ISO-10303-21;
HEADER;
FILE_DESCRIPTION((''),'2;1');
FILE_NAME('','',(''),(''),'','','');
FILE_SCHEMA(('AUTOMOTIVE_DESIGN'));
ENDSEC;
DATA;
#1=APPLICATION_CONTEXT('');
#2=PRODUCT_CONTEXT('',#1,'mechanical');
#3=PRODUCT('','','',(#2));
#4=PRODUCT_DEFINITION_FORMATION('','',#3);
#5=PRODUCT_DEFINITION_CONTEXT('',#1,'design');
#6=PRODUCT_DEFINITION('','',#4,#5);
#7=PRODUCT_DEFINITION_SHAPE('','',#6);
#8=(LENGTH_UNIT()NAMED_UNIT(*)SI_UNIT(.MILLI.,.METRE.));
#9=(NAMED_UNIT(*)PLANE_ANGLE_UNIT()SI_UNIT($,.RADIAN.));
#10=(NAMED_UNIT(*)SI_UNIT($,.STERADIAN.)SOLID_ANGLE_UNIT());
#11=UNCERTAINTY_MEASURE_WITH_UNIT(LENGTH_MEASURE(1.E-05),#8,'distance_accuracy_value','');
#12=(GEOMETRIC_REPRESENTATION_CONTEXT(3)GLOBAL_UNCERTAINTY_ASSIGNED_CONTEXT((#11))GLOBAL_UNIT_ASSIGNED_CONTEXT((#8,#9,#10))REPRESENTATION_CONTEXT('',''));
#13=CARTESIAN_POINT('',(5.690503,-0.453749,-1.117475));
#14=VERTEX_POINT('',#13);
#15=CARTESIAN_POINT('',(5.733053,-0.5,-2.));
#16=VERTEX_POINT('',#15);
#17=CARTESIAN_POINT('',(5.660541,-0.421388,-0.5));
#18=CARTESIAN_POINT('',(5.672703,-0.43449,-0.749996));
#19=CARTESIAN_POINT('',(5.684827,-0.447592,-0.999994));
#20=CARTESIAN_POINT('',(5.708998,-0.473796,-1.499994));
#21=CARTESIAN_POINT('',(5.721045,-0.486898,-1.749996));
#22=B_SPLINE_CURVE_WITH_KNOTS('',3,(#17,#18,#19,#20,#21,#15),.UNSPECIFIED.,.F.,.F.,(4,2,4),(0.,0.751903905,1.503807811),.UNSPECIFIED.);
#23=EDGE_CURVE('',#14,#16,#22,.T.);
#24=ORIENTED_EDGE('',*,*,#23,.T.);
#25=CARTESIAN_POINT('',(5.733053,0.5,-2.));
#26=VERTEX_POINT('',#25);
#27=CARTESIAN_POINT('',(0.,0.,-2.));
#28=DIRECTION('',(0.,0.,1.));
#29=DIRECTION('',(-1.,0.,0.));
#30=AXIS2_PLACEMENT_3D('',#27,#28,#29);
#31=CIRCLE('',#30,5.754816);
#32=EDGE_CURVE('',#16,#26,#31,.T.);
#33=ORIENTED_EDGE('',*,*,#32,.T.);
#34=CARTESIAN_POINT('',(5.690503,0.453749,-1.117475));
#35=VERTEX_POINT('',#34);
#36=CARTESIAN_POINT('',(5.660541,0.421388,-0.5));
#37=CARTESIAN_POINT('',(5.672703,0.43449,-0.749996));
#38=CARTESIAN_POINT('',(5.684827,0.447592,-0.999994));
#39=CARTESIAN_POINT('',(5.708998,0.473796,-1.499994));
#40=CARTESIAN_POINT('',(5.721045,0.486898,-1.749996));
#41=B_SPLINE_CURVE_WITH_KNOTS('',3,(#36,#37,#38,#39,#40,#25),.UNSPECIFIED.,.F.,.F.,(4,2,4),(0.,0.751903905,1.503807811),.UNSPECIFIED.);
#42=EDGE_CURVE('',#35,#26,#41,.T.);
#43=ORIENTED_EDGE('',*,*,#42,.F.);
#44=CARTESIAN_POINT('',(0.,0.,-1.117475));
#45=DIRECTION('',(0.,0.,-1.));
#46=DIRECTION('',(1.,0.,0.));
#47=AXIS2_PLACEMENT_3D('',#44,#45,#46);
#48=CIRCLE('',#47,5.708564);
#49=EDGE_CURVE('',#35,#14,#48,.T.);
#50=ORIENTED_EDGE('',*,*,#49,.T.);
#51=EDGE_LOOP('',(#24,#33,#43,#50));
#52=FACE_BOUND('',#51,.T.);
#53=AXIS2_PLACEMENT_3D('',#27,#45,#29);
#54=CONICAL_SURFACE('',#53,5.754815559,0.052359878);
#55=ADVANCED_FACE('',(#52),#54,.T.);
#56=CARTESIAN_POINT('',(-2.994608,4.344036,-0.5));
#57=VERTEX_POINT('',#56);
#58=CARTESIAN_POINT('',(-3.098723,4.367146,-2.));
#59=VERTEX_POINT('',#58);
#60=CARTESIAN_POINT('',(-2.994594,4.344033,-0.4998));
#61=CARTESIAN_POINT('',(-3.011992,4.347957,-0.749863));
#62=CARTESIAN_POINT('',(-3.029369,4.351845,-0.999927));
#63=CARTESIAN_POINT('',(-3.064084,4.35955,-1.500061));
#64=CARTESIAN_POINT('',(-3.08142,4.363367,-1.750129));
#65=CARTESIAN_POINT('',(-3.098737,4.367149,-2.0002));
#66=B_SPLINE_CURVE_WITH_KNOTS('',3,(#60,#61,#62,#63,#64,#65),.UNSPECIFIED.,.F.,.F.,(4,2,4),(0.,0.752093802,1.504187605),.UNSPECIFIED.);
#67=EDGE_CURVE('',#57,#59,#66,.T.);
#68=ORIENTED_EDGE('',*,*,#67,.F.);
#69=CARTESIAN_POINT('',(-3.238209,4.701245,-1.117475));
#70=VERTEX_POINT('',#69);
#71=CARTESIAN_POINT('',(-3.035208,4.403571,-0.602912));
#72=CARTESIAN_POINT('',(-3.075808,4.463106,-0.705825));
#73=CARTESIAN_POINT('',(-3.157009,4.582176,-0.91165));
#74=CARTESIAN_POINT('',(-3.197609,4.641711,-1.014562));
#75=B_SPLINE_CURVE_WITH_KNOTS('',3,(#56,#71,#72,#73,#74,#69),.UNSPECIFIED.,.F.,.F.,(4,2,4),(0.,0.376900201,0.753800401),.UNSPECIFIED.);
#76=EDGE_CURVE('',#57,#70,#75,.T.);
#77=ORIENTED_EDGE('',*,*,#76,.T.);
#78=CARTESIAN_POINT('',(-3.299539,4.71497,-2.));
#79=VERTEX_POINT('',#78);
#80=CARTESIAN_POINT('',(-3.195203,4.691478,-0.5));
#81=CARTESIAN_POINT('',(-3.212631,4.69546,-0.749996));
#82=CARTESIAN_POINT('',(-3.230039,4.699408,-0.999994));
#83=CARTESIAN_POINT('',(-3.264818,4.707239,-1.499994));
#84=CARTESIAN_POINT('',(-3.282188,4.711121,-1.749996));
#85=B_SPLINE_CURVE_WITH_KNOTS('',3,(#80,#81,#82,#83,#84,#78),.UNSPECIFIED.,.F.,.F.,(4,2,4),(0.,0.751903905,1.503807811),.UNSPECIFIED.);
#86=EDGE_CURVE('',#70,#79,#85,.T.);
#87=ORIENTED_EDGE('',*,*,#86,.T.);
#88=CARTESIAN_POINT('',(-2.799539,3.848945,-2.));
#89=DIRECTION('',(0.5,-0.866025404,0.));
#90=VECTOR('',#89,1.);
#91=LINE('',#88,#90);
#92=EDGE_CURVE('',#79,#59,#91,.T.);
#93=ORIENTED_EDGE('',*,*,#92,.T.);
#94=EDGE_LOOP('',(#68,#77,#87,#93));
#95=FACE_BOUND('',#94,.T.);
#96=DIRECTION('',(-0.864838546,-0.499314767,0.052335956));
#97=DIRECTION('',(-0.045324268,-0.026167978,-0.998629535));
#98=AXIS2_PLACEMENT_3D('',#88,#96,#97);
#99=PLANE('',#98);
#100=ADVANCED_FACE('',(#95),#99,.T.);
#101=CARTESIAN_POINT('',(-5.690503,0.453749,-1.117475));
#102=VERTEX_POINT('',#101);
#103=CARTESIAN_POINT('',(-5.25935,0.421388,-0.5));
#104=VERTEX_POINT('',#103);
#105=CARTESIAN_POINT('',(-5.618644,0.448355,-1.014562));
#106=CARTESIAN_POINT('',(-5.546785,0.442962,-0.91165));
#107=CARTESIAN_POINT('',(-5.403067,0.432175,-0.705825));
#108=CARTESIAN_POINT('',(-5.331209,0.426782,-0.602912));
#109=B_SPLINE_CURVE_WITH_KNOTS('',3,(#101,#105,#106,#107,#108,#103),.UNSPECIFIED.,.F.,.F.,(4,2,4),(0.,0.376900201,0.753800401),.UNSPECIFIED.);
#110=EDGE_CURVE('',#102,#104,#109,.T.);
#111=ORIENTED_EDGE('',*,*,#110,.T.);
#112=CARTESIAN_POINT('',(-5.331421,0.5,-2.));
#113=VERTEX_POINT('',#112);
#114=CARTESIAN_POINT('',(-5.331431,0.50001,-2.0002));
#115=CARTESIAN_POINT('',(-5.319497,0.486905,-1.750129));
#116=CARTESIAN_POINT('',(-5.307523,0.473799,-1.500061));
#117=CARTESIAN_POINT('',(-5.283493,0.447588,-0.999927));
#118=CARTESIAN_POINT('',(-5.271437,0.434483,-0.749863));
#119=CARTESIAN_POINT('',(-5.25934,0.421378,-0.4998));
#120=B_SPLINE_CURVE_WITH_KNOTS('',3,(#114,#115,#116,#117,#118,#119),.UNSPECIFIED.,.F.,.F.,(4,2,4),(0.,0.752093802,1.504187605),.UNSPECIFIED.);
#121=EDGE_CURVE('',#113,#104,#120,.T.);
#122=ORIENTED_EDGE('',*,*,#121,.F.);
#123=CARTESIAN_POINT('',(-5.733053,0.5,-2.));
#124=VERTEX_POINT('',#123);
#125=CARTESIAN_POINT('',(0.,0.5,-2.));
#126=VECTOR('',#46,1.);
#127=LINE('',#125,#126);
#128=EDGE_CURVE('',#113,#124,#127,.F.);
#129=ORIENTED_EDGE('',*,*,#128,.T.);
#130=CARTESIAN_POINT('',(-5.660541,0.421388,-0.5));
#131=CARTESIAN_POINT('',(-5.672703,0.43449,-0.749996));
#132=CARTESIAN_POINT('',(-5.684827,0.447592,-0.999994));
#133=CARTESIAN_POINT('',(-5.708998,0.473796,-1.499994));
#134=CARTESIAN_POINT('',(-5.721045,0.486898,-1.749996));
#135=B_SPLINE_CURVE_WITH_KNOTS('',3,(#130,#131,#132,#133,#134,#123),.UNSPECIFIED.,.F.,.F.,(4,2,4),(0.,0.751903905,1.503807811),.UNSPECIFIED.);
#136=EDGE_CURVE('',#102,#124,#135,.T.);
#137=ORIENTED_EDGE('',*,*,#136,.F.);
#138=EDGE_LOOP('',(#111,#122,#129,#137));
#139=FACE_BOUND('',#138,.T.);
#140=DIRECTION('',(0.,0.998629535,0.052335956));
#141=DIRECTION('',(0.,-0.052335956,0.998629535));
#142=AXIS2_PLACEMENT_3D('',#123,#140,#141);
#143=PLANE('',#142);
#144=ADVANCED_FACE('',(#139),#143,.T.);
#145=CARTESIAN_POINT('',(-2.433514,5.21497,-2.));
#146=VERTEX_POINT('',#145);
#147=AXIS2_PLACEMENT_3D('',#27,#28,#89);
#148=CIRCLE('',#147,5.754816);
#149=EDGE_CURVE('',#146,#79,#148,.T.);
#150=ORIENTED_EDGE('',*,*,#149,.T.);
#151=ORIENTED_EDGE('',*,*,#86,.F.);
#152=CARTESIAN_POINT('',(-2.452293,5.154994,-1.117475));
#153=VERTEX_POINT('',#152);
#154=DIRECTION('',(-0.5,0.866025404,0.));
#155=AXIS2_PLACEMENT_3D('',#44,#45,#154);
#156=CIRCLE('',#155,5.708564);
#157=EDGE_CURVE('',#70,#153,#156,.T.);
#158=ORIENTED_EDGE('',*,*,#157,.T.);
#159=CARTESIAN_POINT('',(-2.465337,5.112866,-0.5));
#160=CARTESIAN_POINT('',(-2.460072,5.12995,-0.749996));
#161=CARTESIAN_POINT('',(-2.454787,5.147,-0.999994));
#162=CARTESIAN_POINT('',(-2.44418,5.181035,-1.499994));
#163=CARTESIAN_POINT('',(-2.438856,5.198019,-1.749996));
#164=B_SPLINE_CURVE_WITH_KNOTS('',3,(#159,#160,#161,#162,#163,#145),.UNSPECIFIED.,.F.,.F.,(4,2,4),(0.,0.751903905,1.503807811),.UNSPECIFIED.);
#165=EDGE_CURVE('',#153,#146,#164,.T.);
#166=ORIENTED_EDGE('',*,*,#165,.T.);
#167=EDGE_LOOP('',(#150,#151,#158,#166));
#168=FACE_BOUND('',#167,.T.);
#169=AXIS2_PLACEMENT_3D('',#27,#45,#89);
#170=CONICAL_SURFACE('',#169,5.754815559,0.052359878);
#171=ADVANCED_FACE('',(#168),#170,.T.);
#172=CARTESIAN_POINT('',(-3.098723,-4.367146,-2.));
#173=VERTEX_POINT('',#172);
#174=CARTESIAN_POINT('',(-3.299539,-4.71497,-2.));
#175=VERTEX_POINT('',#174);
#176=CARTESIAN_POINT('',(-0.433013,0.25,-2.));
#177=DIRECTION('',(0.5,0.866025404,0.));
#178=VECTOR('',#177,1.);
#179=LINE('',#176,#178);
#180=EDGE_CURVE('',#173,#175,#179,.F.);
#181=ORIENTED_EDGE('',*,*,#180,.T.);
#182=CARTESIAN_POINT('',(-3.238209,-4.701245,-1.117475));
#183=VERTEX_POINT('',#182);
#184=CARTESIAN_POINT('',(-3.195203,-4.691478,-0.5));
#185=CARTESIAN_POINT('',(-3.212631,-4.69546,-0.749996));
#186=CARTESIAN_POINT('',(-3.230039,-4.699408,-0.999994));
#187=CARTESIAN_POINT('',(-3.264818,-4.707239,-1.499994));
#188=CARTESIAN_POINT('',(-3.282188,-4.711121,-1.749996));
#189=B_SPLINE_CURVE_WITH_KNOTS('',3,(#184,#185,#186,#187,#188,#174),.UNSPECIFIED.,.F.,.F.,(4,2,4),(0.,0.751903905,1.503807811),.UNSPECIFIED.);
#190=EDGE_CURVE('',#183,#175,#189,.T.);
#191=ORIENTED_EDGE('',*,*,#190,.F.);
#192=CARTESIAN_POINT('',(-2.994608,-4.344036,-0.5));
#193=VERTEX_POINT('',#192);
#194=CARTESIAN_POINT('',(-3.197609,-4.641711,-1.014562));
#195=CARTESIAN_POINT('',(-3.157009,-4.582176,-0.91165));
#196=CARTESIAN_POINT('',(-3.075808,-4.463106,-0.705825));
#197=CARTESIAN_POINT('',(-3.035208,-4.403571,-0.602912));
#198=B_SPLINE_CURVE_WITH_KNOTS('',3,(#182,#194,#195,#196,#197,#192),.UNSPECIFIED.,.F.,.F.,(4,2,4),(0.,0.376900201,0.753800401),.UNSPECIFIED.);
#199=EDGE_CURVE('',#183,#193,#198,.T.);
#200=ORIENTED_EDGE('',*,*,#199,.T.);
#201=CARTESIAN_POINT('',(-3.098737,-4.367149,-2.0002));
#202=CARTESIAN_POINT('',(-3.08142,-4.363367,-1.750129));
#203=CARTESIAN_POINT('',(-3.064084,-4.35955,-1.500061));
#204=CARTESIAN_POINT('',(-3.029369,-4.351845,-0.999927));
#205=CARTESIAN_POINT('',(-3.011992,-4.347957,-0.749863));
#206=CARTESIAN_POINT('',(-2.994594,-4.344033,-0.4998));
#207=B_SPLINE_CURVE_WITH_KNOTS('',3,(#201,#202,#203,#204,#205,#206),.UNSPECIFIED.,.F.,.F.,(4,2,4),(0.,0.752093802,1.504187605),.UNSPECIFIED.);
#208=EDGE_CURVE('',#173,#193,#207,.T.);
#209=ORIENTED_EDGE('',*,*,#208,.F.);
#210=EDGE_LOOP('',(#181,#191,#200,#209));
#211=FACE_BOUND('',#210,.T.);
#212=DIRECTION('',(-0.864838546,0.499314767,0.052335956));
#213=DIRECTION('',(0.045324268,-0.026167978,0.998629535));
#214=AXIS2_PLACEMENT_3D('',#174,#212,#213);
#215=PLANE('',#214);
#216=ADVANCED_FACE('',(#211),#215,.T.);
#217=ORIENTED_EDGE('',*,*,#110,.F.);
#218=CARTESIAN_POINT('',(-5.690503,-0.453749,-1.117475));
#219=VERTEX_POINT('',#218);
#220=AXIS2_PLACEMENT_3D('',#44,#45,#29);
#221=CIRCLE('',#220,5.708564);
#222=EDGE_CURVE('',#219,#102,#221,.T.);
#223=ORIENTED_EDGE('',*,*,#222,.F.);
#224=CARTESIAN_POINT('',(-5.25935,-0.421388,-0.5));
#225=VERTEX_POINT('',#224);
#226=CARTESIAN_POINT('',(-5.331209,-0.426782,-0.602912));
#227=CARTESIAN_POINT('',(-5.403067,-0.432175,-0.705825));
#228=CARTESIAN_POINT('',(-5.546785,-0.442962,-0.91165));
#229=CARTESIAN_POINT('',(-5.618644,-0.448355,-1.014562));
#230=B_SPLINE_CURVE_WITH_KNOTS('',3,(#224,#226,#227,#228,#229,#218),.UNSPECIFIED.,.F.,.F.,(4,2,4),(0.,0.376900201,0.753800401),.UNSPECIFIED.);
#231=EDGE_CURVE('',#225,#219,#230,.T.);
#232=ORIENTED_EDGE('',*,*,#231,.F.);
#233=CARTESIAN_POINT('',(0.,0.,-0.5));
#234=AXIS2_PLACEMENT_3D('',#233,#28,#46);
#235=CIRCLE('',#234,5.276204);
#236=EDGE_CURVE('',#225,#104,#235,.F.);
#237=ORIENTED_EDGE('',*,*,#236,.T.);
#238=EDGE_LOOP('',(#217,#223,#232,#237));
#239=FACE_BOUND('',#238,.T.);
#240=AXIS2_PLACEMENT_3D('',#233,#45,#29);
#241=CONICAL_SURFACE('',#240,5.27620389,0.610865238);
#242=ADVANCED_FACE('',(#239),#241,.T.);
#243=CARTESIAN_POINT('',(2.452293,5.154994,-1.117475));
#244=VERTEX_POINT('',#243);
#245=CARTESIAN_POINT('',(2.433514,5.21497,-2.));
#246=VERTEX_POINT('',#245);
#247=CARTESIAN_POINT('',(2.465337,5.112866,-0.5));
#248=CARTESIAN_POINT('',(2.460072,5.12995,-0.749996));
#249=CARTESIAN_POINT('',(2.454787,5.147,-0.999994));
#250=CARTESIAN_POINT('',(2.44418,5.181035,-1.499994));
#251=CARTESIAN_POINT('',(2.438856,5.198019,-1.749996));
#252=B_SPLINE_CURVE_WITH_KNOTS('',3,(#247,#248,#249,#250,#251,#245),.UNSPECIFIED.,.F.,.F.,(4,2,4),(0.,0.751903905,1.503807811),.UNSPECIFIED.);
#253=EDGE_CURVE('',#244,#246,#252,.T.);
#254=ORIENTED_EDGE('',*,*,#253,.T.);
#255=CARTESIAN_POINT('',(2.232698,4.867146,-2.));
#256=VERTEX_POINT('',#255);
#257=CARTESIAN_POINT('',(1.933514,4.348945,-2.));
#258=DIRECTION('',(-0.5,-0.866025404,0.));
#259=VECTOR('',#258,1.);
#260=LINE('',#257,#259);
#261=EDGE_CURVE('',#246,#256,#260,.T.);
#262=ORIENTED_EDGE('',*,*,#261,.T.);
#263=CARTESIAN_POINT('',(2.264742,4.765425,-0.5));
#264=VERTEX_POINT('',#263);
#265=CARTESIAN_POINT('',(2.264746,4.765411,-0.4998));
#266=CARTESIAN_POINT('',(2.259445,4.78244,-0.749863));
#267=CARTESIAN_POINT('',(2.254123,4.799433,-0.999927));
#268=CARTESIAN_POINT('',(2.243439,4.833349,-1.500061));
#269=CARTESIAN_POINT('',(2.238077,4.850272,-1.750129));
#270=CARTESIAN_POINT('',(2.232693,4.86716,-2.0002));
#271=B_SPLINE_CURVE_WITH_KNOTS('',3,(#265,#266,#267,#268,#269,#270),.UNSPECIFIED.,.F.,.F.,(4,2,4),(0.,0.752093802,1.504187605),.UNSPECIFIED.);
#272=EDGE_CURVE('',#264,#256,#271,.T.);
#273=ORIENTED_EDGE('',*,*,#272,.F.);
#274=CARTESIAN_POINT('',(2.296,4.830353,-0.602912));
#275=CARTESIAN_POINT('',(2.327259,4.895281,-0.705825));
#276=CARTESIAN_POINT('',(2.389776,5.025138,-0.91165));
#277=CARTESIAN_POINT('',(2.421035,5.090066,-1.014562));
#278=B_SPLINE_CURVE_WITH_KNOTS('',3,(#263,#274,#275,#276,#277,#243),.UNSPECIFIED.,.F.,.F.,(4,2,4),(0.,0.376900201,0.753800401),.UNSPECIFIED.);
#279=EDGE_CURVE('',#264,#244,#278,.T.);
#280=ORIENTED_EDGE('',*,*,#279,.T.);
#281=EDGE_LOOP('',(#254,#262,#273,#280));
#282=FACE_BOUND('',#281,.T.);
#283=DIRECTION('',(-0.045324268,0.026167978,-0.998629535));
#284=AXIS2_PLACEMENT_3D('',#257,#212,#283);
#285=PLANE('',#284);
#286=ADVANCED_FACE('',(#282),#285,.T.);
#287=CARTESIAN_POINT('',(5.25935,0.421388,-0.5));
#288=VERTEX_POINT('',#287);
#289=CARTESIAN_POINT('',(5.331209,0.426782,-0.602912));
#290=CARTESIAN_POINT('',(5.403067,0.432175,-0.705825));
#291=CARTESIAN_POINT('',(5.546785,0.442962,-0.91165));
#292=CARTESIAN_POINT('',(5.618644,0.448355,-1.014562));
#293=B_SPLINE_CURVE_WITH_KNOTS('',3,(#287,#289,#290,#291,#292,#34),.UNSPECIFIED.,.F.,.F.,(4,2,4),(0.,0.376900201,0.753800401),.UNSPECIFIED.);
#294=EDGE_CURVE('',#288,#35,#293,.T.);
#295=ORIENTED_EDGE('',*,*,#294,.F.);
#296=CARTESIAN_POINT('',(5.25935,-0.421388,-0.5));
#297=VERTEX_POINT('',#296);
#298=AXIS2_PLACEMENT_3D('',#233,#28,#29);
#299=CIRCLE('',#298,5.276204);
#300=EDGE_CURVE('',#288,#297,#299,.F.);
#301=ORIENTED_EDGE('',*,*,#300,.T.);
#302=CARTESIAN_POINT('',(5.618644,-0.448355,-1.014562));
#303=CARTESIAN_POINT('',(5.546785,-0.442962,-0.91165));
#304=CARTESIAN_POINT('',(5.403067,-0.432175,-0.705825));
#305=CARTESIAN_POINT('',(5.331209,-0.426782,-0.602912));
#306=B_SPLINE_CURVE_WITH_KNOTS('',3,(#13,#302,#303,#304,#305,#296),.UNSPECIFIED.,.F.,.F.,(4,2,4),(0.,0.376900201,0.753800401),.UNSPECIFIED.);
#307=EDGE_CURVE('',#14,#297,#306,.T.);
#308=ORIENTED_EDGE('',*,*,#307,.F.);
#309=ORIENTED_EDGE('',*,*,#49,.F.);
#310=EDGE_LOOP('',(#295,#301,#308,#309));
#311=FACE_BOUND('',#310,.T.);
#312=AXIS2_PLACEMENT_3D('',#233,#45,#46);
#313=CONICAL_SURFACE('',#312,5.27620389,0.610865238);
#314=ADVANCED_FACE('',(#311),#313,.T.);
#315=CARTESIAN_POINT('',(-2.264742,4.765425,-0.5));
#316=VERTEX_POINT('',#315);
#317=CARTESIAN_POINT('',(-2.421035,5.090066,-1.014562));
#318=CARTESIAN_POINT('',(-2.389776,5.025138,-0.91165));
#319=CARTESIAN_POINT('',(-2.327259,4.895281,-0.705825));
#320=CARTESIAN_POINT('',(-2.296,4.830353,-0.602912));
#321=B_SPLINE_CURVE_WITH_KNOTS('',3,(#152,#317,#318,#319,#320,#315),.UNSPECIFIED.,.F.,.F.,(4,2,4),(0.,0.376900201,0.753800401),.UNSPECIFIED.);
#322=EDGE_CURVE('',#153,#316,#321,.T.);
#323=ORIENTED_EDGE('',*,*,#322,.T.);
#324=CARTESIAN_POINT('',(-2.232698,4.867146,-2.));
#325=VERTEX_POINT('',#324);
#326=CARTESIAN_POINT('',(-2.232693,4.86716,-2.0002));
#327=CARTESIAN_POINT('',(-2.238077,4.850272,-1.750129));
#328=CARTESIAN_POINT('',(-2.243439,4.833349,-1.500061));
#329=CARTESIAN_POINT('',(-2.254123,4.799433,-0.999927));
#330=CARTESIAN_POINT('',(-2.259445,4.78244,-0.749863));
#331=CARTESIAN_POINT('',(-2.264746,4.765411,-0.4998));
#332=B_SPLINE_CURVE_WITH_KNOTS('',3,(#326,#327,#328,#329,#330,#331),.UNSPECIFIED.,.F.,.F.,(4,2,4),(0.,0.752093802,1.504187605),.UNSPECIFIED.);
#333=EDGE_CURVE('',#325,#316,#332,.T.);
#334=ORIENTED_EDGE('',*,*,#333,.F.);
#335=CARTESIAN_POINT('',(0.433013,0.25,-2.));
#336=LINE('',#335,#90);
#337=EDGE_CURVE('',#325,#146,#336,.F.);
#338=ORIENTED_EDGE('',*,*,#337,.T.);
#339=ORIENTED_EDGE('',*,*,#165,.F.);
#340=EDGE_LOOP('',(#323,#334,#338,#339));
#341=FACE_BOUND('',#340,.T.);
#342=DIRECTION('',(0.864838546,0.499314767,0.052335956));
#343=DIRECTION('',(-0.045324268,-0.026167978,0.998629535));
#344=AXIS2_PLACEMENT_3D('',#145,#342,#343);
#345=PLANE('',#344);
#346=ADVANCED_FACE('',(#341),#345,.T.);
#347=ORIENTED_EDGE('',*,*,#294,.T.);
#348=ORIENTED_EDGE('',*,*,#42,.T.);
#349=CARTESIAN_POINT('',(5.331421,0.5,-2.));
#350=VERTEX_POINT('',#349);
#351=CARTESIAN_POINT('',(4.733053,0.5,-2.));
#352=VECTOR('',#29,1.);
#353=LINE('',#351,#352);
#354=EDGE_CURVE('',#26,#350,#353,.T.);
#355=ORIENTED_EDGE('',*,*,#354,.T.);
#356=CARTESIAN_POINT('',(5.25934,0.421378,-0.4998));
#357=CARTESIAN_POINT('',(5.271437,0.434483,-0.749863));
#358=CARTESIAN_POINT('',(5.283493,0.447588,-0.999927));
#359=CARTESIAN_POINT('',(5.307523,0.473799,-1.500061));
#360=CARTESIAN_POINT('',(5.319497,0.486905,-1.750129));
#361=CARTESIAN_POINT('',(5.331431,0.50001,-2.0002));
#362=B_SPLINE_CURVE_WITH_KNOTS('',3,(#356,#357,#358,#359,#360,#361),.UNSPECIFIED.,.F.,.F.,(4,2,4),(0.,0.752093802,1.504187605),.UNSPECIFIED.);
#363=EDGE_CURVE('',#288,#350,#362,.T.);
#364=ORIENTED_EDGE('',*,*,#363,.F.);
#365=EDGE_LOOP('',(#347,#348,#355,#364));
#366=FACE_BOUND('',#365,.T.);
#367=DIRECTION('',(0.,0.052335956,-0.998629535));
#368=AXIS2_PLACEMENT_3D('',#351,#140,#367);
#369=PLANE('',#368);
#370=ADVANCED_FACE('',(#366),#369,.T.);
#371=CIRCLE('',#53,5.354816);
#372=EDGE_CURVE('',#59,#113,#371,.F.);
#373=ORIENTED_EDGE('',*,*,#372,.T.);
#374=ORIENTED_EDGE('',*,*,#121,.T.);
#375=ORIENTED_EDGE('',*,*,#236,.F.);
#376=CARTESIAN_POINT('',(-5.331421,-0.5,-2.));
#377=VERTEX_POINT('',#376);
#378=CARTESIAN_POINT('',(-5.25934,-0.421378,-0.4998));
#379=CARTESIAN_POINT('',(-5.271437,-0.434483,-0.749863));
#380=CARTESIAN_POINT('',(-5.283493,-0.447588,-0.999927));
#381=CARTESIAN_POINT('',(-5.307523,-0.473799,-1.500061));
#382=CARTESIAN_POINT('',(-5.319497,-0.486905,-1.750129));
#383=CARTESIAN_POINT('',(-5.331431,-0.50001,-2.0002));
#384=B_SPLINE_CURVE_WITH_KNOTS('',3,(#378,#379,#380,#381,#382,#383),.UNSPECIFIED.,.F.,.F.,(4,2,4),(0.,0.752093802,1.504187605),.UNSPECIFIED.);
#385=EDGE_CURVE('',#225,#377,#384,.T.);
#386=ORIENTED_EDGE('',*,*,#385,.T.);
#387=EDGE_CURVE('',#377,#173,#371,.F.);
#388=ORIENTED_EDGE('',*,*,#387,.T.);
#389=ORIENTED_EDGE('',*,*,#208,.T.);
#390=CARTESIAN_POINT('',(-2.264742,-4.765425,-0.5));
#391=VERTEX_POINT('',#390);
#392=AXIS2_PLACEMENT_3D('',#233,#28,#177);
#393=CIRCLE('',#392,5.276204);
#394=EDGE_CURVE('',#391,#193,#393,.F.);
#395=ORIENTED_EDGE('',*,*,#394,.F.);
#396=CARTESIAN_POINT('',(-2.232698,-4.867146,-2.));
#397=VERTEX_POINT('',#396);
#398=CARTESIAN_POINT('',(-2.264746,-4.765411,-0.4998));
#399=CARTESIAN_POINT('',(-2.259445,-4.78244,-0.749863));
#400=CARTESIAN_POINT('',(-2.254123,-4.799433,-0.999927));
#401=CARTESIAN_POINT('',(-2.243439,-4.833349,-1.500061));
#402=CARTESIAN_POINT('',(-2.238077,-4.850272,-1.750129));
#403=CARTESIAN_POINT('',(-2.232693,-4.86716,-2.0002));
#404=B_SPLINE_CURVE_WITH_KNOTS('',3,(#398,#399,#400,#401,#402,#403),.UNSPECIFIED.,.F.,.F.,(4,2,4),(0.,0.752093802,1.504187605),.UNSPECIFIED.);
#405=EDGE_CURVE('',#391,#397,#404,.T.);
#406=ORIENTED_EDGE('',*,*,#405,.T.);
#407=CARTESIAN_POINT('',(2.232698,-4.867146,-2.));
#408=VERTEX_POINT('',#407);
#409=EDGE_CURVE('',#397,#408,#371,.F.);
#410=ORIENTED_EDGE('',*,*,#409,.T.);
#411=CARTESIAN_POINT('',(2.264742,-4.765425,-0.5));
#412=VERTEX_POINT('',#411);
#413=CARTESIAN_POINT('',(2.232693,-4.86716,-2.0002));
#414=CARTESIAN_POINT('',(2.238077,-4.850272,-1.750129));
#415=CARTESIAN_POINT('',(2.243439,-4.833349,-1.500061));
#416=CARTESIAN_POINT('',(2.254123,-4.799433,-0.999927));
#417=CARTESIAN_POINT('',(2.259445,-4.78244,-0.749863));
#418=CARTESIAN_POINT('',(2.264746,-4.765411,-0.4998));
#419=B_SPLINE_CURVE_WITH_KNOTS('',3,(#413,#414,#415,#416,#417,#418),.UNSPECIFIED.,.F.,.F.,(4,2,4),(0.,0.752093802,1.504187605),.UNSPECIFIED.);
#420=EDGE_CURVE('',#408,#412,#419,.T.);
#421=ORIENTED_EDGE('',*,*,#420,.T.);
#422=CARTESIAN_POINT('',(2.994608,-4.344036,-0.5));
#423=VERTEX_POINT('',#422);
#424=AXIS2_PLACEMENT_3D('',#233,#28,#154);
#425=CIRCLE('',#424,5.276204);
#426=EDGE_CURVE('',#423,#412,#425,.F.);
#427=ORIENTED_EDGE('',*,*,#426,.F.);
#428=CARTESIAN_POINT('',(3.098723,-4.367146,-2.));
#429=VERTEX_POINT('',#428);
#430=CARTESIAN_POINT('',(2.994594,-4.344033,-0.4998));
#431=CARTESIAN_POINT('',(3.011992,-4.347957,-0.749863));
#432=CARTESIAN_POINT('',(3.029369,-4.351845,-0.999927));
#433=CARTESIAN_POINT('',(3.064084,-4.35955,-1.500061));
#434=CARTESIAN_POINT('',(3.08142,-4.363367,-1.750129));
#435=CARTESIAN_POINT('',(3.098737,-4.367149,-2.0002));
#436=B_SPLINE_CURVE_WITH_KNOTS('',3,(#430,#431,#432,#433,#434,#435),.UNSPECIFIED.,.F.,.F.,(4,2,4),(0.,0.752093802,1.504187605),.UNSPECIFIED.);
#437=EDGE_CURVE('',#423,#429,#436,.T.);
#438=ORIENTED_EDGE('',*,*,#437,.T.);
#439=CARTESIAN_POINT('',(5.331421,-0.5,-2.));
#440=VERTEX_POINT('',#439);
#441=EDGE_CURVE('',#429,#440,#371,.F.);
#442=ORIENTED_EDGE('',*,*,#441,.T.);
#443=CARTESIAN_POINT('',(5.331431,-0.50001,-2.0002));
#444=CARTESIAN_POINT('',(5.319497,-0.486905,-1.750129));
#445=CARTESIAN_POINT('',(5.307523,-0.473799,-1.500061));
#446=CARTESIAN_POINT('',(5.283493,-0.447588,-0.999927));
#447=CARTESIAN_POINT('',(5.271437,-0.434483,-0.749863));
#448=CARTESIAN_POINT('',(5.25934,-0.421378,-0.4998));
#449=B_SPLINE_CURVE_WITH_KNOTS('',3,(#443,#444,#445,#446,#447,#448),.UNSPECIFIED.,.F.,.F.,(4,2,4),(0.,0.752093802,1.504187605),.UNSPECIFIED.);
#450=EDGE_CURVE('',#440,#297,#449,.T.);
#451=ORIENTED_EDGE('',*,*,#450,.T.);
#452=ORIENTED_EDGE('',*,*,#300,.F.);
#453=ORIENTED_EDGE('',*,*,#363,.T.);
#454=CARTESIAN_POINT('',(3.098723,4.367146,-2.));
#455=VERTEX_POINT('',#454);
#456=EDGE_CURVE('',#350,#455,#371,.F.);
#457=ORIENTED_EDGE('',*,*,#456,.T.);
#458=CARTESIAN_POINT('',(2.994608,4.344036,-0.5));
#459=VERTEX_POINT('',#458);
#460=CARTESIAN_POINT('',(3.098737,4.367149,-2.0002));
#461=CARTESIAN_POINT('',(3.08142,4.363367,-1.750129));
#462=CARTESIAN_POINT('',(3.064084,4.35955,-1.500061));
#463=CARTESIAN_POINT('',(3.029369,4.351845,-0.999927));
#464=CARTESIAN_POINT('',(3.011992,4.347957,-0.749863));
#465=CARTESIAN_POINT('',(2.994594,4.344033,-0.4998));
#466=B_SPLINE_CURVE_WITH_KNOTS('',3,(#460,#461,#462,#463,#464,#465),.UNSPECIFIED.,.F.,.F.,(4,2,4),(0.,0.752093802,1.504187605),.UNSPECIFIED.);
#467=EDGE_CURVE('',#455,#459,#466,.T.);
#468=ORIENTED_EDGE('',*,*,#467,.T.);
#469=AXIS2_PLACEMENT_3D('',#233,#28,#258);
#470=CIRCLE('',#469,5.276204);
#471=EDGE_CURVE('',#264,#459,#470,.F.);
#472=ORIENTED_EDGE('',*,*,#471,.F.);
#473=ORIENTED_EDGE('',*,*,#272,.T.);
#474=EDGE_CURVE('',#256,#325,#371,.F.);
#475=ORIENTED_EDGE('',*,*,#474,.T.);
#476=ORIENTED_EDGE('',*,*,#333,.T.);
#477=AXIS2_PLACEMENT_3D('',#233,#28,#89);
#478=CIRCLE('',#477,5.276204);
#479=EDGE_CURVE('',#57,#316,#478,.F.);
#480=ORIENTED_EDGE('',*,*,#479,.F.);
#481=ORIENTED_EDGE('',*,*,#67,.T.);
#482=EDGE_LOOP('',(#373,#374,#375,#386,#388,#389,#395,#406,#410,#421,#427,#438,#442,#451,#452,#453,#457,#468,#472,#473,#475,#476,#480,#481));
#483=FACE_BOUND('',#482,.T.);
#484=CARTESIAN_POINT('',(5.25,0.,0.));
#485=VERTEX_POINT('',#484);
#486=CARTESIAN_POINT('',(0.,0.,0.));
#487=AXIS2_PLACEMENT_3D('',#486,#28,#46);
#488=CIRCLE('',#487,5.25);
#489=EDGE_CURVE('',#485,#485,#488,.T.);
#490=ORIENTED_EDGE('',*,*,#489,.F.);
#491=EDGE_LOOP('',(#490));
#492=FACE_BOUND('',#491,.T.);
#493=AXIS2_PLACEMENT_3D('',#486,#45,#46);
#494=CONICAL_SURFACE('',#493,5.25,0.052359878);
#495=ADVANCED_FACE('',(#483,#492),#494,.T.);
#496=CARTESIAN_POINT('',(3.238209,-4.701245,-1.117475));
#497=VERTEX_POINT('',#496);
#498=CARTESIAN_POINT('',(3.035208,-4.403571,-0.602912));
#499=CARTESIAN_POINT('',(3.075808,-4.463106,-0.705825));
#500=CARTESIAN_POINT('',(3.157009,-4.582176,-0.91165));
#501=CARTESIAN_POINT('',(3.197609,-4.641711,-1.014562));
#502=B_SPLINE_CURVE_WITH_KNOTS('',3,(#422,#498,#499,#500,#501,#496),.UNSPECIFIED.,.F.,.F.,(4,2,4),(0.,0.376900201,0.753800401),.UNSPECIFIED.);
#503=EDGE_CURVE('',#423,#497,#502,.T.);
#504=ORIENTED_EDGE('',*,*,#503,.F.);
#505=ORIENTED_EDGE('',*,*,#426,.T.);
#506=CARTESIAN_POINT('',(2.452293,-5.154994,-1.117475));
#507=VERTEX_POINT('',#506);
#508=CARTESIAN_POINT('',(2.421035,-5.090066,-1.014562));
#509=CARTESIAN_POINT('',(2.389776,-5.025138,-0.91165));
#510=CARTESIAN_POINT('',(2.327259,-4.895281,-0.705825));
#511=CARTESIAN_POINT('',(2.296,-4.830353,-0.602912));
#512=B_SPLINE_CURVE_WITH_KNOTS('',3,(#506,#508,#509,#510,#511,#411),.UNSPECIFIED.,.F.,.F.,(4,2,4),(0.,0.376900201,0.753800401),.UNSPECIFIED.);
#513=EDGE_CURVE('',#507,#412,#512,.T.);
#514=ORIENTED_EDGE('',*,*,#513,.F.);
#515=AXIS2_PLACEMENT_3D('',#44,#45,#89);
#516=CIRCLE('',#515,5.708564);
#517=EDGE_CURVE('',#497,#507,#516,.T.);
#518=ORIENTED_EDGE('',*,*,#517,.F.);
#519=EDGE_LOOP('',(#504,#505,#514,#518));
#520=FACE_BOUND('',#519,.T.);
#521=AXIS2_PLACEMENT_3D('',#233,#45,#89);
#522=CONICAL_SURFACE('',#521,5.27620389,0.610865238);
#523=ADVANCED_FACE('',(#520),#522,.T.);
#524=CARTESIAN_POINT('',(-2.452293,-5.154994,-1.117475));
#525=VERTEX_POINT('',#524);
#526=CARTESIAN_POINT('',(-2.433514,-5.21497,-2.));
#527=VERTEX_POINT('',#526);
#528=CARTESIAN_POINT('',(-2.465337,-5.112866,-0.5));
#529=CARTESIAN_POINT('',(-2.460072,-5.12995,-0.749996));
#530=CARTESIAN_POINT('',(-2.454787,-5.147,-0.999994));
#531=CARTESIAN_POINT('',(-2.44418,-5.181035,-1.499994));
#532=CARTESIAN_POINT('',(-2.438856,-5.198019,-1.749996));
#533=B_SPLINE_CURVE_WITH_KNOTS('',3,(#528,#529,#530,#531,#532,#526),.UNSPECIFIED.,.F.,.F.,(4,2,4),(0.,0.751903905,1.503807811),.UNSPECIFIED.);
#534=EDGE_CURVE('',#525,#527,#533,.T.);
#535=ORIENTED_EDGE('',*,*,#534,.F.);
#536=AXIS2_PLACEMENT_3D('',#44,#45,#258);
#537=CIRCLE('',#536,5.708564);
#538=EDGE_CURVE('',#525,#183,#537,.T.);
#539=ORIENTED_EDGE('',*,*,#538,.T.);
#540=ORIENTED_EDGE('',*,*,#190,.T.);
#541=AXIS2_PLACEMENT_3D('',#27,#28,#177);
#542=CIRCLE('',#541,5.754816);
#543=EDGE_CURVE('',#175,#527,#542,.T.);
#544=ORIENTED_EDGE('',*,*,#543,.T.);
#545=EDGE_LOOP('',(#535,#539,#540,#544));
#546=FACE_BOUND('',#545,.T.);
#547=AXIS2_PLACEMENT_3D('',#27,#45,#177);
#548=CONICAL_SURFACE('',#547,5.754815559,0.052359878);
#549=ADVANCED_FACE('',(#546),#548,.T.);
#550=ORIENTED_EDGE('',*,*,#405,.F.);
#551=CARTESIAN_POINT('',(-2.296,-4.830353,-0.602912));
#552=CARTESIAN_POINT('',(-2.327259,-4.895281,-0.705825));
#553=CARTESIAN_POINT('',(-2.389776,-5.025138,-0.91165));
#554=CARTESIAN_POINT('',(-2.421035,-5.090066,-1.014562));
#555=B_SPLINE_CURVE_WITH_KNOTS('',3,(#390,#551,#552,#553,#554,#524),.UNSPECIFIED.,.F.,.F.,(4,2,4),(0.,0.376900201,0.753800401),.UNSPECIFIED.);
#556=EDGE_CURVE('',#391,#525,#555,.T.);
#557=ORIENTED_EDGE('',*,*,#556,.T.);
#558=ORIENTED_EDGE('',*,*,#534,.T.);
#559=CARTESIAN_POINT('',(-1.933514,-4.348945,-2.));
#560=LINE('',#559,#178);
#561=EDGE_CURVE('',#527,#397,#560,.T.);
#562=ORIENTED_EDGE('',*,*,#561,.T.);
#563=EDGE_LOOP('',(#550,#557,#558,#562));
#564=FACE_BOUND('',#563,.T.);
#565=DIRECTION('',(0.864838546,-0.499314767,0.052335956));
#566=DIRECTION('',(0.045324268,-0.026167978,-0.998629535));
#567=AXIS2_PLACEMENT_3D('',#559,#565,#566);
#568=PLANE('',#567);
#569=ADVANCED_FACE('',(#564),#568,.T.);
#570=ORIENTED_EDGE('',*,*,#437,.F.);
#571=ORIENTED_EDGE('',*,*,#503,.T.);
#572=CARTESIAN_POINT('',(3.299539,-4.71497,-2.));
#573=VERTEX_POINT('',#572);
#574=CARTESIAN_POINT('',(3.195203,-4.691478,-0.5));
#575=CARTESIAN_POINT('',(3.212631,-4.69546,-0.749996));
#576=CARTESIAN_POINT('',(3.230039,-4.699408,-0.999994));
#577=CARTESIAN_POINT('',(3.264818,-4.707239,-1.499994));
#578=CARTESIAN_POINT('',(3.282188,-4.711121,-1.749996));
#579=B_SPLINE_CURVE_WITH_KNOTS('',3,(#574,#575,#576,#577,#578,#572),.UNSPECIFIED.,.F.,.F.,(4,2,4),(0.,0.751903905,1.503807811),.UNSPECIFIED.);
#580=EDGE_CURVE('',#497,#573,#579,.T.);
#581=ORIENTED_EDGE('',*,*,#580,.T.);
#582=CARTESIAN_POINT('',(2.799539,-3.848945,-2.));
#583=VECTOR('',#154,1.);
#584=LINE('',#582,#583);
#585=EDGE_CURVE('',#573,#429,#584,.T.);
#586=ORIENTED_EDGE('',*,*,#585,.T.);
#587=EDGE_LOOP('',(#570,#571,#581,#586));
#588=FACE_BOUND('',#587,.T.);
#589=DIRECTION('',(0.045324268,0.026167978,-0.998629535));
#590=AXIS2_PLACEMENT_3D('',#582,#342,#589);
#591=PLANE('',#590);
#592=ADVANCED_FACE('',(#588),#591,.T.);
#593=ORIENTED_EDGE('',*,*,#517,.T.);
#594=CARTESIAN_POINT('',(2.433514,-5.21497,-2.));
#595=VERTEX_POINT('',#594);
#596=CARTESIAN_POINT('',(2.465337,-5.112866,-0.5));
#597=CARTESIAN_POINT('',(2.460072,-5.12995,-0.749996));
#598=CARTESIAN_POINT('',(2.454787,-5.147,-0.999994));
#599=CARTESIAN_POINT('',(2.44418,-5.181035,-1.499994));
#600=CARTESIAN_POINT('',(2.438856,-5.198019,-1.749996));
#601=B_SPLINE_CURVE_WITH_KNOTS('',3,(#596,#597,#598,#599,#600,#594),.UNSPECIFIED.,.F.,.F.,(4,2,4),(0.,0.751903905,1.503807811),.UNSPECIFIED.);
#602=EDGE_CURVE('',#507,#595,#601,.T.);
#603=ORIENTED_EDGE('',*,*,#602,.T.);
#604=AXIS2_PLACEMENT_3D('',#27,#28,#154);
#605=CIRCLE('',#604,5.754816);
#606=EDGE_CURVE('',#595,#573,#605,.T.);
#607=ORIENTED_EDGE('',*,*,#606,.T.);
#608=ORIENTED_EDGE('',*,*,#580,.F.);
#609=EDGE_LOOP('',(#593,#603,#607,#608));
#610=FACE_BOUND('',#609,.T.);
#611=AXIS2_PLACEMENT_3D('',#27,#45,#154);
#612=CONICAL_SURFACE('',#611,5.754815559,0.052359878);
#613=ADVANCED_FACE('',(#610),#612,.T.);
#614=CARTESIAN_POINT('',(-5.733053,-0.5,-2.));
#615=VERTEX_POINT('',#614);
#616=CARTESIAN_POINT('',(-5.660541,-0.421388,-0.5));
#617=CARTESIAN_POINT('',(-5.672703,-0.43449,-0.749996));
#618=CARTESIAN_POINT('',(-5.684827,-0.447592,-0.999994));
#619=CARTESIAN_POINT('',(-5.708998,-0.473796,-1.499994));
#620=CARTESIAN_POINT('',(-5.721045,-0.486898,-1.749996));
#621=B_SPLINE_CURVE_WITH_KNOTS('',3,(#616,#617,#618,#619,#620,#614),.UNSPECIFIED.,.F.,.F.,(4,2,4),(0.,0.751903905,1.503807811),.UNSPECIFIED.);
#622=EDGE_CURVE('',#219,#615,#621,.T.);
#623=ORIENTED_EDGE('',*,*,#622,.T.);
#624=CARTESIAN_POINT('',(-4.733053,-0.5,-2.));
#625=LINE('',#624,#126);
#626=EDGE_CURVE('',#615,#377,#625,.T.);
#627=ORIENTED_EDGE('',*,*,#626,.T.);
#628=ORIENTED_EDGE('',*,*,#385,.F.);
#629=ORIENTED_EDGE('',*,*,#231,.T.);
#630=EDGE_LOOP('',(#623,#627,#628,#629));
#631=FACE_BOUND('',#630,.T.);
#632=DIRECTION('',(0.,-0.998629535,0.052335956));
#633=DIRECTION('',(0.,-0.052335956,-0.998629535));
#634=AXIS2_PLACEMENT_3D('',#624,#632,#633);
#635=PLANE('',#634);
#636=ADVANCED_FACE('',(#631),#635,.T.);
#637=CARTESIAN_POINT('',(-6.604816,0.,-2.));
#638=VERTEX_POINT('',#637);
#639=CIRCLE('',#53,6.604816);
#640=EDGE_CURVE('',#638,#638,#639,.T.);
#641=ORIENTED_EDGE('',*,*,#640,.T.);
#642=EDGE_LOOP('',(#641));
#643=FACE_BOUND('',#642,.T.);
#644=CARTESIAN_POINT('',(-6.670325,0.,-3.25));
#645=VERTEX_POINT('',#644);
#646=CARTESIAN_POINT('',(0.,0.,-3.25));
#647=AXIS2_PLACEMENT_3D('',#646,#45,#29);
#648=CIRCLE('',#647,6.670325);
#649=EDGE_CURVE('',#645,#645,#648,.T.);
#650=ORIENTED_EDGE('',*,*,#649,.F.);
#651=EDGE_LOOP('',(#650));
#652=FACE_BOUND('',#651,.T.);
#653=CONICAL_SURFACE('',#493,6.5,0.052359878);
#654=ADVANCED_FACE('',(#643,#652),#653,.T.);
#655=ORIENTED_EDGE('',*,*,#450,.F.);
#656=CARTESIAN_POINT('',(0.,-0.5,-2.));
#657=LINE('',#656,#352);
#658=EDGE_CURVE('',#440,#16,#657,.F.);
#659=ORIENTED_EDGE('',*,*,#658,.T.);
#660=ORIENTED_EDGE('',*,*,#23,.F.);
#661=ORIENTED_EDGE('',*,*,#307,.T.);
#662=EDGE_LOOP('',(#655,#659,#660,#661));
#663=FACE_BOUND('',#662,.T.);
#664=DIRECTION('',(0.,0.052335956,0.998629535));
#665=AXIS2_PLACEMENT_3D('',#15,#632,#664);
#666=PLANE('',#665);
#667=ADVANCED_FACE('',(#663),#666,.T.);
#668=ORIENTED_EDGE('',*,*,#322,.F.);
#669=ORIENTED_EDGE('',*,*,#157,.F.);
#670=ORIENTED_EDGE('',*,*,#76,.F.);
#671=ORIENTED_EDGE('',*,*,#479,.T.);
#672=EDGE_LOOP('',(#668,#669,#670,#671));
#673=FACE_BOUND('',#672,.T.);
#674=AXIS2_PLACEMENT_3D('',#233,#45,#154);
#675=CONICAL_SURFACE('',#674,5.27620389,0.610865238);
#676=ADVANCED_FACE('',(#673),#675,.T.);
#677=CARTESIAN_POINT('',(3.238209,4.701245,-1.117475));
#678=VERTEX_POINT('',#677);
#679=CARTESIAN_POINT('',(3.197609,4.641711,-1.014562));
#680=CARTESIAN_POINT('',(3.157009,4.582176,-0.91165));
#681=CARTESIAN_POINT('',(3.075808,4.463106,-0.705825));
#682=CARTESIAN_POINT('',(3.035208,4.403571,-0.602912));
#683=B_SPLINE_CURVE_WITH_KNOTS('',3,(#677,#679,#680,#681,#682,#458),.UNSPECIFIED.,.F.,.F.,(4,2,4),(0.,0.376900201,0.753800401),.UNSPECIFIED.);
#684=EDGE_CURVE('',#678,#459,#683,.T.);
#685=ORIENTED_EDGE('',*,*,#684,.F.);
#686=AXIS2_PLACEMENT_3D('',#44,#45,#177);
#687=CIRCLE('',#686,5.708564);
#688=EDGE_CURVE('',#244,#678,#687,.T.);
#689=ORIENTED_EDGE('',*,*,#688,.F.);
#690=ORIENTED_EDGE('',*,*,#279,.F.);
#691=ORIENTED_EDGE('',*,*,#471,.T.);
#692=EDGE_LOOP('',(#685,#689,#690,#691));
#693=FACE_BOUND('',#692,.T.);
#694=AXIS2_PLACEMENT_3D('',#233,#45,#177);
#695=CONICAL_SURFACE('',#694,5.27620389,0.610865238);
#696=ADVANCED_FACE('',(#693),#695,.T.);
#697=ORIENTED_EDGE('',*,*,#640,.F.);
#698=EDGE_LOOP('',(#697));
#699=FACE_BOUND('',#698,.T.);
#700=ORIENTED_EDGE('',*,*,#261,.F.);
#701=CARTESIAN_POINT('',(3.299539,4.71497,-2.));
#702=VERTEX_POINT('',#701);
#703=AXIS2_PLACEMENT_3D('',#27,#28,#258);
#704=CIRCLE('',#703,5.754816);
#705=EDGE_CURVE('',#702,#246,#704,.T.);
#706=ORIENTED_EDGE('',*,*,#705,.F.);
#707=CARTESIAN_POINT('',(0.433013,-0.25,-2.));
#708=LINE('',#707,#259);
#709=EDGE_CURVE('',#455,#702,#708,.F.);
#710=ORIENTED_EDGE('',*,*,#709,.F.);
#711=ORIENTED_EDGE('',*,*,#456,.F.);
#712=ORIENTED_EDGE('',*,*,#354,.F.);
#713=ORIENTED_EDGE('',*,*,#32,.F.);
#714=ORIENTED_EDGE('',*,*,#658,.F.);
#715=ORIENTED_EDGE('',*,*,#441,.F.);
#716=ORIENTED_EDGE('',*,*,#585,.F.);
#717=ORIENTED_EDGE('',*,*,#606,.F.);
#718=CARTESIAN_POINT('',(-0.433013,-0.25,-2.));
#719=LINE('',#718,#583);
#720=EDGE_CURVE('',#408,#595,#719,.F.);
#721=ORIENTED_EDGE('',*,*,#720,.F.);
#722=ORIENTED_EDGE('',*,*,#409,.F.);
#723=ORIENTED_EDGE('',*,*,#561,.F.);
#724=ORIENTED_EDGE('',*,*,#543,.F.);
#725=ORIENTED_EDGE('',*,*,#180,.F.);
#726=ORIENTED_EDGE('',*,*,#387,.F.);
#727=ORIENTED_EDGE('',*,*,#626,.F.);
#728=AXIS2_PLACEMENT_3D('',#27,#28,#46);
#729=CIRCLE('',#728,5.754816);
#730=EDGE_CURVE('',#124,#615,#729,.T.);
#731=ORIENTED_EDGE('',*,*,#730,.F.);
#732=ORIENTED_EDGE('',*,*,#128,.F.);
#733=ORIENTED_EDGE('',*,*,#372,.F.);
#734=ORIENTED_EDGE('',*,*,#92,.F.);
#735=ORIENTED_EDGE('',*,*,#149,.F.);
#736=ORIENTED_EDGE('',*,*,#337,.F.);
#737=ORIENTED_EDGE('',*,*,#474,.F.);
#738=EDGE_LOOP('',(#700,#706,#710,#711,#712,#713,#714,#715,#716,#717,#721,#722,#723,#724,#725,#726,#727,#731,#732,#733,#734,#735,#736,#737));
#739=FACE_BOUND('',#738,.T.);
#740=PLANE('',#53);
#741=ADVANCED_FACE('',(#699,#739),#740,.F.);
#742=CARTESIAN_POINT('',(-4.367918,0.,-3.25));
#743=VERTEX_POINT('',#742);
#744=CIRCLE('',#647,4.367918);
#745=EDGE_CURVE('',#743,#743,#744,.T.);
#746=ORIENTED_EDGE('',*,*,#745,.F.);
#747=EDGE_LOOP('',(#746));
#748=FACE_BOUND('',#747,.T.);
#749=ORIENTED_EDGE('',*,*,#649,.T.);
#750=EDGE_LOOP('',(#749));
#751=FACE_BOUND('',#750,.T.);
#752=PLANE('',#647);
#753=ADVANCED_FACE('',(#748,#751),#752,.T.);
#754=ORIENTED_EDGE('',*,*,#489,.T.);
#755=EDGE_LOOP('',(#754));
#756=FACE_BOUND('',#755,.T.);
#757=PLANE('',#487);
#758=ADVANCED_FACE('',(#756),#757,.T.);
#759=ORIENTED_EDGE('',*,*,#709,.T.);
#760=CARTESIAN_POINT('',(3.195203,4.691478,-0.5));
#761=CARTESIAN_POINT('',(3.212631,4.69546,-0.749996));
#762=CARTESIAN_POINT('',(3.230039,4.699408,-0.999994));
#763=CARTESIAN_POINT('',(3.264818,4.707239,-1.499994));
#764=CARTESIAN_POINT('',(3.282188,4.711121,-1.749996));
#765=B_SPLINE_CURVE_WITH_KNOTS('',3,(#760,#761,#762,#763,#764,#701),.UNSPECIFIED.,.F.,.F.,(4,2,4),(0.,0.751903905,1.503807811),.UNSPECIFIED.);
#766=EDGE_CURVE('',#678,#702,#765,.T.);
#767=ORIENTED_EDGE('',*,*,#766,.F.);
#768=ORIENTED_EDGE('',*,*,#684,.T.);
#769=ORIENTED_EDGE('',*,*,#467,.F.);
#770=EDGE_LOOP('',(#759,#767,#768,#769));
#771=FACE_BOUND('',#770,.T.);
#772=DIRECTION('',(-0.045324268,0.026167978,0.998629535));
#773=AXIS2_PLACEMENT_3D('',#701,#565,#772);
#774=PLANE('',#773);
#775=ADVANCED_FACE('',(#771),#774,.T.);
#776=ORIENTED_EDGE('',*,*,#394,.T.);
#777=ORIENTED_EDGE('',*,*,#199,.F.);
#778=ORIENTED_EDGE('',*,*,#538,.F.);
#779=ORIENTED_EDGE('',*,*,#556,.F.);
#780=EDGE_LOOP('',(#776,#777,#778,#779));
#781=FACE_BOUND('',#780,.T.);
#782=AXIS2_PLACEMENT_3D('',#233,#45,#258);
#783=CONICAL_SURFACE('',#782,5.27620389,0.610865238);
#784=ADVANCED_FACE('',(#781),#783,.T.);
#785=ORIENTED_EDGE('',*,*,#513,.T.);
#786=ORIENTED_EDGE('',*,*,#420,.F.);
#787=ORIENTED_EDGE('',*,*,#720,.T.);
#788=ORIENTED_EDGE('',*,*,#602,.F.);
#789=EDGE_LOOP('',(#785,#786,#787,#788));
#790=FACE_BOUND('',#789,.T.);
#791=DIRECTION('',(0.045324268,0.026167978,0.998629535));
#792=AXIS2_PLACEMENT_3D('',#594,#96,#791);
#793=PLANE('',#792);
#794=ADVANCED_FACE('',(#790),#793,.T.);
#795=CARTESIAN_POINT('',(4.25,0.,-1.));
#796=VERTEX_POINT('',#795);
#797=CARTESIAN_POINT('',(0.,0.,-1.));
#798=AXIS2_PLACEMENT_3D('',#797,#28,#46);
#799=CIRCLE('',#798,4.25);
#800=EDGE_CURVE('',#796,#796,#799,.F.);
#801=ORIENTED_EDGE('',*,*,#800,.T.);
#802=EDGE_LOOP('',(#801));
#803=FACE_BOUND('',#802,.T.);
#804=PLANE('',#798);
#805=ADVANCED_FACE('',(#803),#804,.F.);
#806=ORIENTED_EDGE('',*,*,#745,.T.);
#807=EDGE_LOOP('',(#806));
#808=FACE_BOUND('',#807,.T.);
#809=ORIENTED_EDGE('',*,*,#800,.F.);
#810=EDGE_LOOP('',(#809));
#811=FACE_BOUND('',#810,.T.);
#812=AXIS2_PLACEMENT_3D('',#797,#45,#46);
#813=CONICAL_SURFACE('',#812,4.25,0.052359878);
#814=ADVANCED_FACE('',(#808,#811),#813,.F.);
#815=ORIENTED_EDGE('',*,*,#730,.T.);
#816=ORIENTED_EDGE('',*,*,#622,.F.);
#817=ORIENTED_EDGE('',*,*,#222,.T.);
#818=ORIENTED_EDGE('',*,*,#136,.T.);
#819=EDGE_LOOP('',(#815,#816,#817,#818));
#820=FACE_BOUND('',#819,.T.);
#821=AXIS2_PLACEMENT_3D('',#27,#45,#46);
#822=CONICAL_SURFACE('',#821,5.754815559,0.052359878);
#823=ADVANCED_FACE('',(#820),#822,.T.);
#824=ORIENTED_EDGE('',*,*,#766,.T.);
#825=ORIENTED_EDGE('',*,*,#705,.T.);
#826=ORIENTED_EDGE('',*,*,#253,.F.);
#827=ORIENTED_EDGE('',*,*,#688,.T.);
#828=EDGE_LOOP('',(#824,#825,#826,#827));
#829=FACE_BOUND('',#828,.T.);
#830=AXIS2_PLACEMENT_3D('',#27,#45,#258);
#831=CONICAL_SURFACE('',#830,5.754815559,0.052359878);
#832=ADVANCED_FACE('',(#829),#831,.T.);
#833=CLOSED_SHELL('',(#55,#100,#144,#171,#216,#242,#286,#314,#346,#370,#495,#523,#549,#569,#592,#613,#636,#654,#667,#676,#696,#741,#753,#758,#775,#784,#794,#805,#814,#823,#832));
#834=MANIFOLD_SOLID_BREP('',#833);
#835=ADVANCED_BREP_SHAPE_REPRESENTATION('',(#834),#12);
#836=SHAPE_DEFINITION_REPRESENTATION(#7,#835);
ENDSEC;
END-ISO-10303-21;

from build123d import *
from OCP.BRepFilletAPI import BRepFilletAPI_MakeChamfer

# Parameters (mm, degrees)
SKETCH1_R                                       = 5.25
BASE_EXTRUSION_DEPTH                            = 2
SKETCH3_R                                       = 6.5
LENS_MOUNTING_FLANGE_DEPTH                      = 1.25
SKETCH5_R                                       = 4.25
INNER_CAVITY_DEPTH                              = 2.25
OUTSIDE_DRAFT_ANGLE                             = 3
INSIDE_DRAFT_ANGLE                              = 3
INTERFERENCE_RIB_DEPTH                          = 1.5
INTERFERENCE_RIB_TAPER                          = 3
INTERFERENCE_RIB_CHAMFER_SIZE2                  = 0.4
INTERFERENCE_RIB_CHAMFER_SIZE                   = 0.618322148
INTERFERENCE_RIB_PATTREN_COUNT                  = 6
INTERFERENCE_RIB_CHAMFER_OF_INTERFERENCE_SIZE   = 0.4
INTERFERENCE_RIB_CHAMFER_OF_INTERFERENCE_SIZE_2 = 0.618322148


with BuildPart() as part:
    # Sketch1 → Base Extrusion (new body)
    with BuildSketch(Plane.XY):
        Circle(SKETCH1_R)
    extrude(amount=-BASE_EXTRUSION_DEPTH)

    # Sketch3 → Lens Mounting Flange (add)
    with BuildSketch(Plane(origin=(0, 0, -2), x_dir=(-1, 0, 0), z_dir=(0, 0, -1))):
        Circle(SKETCH3_R)
    extrude(amount=LENS_MOUNTING_FLANGE_DEPTH)

    # Sketch5 → Inner Cavity (cut)
    with BuildSketch(Plane(origin=(0, 0, -3.25), x_dir=(-1, 0, 0), z_dir=(0, 0, -1))):
        Circle(SKETCH5_R)
    extrude(amount=-INNER_CAVITY_DEPTH, mode=Mode.SUBTRACT)

    # Outside Draft
    outside_draft_faces = [part.faces().sort_by_distance(p)[0] for p in [
        (6.5, 0, -2.625),
        (-5.25, 0, -1),
    ]]
    draft(outside_draft_faces, Plane.XY, OUTSIDE_DRAFT_ANGLE)

    # Inside Draft
    inside_draft_faces = [part.faces().sort_by_distance(p)[0] for p in [
        (4.25, 0, -2.125),
    ]]
    draft(inside_draft_faces, Plane(origin=(0, 0, -1), x_dir=(-1, 0, 0), z_dir=(0, 0, -1)), INSIDE_DRAFT_ANGLE)

    # Sketch7 → Interference Rib (add)
    with BuildSketch(Plane.XY.offset(-2)):
        with BuildLine():
            ThreePointArc((-5.733053472, 0.5), (-5.754815559, 0), (-5.733053472, -0.5))
            Line((-5.733053472, -0.5), (-4.733053472, -0.5))
            Line((-4.733053472, -0.5), (-4.733053472, 0.5))
            Line((-4.733053472, 0.5), (-5.733053472, 0.5))
        make_face()
    interference_rib = extrude(amount=INTERFERENCE_RIB_DEPTH, taper=INTERFERENCE_RIB_TAPER)

    # Interference Rib Chamfer
    interference_rib_chamfer_edges = [part.edges().sort_by_distance(p)[0] for p in [
        (-5.67620389, 0, -0.5),
    ]]
    interference_rib_chamfer_side = [part.faces().sort_by_distance(p)[0] for p in [
        (-5.676622577, 0, -0.507989036),
    ]]
    chamfer(interference_rib_chamfer_edges, length=INTERFERENCE_RIB_CHAMFER_SIZE - 0.0001, length2=INTERFERENCE_RIB_CHAMFER_SIZE2 - 0.0001, reference=interference_rib_chamfer_side[0])  # a hair under: the kernel refuses the full size

    # Interference Rib Pattren: Interference Rib ×6 about axis
    interference_rib_pattren_axis = Axis((0, 0, 0), (0, 0, 1))
    for i in range(1, INTERFERENCE_RIB_PATTREN_COUNT):
        add(interference_rib.rotate(interference_rib_pattren_axis, i * 360 / INTERFERENCE_RIB_PATTREN_COUNT))

    # Interference Rib Chamfer of Interference
    interference_rib_chamfer_of_interference_edges_1 = [part.edges().sort_by_distance(p)[0] for p in [
        (-2.838101945, -4.915736765, -0.5),
    ]]
    interference_rib_chamfer_of_interference_side_1 = [part.faces().sort_by_distance(p)[0] for p in [
        (-2.834101945, -4.908808562, -0.5),
    ]]
    interference_rib_chamfer_of_interference_edges_2 = [part.edges().sort_by_distance(p)[0] for p in [
        (2.838101945, -4.915736765, -0.5),
    ]]
    interference_rib_chamfer_of_interference_side_2 = [part.faces().sort_by_distance(p)[0] for p in [
        (2.834101945, -4.908808562, -0.5),
    ]]
    interference_rib_chamfer_of_interference_edges_3 = [part.edges().sort_by_distance(p)[0] for p in [
        (5.67620389, 0, -0.5),
    ]]
    interference_rib_chamfer_of_interference_side_3 = [part.faces().sort_by_distance(p)[0] for p in [
        (5.66820389, 0, -0.5),
    ]]
    interference_rib_chamfer_of_interference_edges_4 = [part.edges().sort_by_distance(p)[0] for p in [
        (2.838101945, 4.915736765, -0.5),
    ]]
    interference_rib_chamfer_of_interference_side_4 = [part.faces().sort_by_distance(p)[0] for p in [
        (2.834101945, 4.908808562, -0.5),
    ]]
    interference_rib_chamfer_of_interference_edges_5 = [part.edges().sort_by_distance(p)[0] for p in [
        (-2.838101945, 4.915736765, -0.5),
    ]]
    interference_rib_chamfer_of_interference_side_5 = [part.faces().sort_by_distance(p)[0] for p in [
        (-2.834101945, 4.908808562, -0.5),
    ]]
    interference_rib_chamfer_of_interference = BRepFilletAPI_MakeChamfer(part.part.solid().wrapped)
    for e in interference_rib_chamfer_of_interference_edges_1:
        interference_rib_chamfer_of_interference.Add(INTERFERENCE_RIB_CHAMFER_OF_INTERFERENCE_SIZE - 0.0001, INTERFERENCE_RIB_CHAMFER_OF_INTERFERENCE_SIZE_2 - 0.0001, e.wrapped, interference_rib_chamfer_of_interference_side_1[0].wrapped)
    for e in interference_rib_chamfer_of_interference_edges_2:
        interference_rib_chamfer_of_interference.Add(INTERFERENCE_RIB_CHAMFER_OF_INTERFERENCE_SIZE - 0.0001, INTERFERENCE_RIB_CHAMFER_OF_INTERFERENCE_SIZE_2 - 0.0001, e.wrapped, interference_rib_chamfer_of_interference_side_2[0].wrapped)
    for e in interference_rib_chamfer_of_interference_edges_3:
        interference_rib_chamfer_of_interference.Add(INTERFERENCE_RIB_CHAMFER_OF_INTERFERENCE_SIZE - 0.0001, INTERFERENCE_RIB_CHAMFER_OF_INTERFERENCE_SIZE_2 - 0.0001, e.wrapped, interference_rib_chamfer_of_interference_side_3[0].wrapped)
    for e in interference_rib_chamfer_of_interference_edges_4:
        interference_rib_chamfer_of_interference.Add(INTERFERENCE_RIB_CHAMFER_OF_INTERFERENCE_SIZE - 0.0001, INTERFERENCE_RIB_CHAMFER_OF_INTERFERENCE_SIZE_2 - 0.0001, e.wrapped, interference_rib_chamfer_of_interference_side_4[0].wrapped)
    for e in interference_rib_chamfer_of_interference_edges_5:
        interference_rib_chamfer_of_interference.Add(INTERFERENCE_RIB_CHAMFER_OF_INTERFERENCE_SIZE - 0.0001, INTERFERENCE_RIB_CHAMFER_OF_INTERFERENCE_SIZE_2 - 0.0001, e.wrapped, interference_rib_chamfer_of_interference_side_5[0].wrapped)
    add(Compound.cast(interference_rib_chamfer_of_interference.Shape()), mode=Mode.REPLACE)  # a hair under: the kernel refuses the full size


solid = part.part
